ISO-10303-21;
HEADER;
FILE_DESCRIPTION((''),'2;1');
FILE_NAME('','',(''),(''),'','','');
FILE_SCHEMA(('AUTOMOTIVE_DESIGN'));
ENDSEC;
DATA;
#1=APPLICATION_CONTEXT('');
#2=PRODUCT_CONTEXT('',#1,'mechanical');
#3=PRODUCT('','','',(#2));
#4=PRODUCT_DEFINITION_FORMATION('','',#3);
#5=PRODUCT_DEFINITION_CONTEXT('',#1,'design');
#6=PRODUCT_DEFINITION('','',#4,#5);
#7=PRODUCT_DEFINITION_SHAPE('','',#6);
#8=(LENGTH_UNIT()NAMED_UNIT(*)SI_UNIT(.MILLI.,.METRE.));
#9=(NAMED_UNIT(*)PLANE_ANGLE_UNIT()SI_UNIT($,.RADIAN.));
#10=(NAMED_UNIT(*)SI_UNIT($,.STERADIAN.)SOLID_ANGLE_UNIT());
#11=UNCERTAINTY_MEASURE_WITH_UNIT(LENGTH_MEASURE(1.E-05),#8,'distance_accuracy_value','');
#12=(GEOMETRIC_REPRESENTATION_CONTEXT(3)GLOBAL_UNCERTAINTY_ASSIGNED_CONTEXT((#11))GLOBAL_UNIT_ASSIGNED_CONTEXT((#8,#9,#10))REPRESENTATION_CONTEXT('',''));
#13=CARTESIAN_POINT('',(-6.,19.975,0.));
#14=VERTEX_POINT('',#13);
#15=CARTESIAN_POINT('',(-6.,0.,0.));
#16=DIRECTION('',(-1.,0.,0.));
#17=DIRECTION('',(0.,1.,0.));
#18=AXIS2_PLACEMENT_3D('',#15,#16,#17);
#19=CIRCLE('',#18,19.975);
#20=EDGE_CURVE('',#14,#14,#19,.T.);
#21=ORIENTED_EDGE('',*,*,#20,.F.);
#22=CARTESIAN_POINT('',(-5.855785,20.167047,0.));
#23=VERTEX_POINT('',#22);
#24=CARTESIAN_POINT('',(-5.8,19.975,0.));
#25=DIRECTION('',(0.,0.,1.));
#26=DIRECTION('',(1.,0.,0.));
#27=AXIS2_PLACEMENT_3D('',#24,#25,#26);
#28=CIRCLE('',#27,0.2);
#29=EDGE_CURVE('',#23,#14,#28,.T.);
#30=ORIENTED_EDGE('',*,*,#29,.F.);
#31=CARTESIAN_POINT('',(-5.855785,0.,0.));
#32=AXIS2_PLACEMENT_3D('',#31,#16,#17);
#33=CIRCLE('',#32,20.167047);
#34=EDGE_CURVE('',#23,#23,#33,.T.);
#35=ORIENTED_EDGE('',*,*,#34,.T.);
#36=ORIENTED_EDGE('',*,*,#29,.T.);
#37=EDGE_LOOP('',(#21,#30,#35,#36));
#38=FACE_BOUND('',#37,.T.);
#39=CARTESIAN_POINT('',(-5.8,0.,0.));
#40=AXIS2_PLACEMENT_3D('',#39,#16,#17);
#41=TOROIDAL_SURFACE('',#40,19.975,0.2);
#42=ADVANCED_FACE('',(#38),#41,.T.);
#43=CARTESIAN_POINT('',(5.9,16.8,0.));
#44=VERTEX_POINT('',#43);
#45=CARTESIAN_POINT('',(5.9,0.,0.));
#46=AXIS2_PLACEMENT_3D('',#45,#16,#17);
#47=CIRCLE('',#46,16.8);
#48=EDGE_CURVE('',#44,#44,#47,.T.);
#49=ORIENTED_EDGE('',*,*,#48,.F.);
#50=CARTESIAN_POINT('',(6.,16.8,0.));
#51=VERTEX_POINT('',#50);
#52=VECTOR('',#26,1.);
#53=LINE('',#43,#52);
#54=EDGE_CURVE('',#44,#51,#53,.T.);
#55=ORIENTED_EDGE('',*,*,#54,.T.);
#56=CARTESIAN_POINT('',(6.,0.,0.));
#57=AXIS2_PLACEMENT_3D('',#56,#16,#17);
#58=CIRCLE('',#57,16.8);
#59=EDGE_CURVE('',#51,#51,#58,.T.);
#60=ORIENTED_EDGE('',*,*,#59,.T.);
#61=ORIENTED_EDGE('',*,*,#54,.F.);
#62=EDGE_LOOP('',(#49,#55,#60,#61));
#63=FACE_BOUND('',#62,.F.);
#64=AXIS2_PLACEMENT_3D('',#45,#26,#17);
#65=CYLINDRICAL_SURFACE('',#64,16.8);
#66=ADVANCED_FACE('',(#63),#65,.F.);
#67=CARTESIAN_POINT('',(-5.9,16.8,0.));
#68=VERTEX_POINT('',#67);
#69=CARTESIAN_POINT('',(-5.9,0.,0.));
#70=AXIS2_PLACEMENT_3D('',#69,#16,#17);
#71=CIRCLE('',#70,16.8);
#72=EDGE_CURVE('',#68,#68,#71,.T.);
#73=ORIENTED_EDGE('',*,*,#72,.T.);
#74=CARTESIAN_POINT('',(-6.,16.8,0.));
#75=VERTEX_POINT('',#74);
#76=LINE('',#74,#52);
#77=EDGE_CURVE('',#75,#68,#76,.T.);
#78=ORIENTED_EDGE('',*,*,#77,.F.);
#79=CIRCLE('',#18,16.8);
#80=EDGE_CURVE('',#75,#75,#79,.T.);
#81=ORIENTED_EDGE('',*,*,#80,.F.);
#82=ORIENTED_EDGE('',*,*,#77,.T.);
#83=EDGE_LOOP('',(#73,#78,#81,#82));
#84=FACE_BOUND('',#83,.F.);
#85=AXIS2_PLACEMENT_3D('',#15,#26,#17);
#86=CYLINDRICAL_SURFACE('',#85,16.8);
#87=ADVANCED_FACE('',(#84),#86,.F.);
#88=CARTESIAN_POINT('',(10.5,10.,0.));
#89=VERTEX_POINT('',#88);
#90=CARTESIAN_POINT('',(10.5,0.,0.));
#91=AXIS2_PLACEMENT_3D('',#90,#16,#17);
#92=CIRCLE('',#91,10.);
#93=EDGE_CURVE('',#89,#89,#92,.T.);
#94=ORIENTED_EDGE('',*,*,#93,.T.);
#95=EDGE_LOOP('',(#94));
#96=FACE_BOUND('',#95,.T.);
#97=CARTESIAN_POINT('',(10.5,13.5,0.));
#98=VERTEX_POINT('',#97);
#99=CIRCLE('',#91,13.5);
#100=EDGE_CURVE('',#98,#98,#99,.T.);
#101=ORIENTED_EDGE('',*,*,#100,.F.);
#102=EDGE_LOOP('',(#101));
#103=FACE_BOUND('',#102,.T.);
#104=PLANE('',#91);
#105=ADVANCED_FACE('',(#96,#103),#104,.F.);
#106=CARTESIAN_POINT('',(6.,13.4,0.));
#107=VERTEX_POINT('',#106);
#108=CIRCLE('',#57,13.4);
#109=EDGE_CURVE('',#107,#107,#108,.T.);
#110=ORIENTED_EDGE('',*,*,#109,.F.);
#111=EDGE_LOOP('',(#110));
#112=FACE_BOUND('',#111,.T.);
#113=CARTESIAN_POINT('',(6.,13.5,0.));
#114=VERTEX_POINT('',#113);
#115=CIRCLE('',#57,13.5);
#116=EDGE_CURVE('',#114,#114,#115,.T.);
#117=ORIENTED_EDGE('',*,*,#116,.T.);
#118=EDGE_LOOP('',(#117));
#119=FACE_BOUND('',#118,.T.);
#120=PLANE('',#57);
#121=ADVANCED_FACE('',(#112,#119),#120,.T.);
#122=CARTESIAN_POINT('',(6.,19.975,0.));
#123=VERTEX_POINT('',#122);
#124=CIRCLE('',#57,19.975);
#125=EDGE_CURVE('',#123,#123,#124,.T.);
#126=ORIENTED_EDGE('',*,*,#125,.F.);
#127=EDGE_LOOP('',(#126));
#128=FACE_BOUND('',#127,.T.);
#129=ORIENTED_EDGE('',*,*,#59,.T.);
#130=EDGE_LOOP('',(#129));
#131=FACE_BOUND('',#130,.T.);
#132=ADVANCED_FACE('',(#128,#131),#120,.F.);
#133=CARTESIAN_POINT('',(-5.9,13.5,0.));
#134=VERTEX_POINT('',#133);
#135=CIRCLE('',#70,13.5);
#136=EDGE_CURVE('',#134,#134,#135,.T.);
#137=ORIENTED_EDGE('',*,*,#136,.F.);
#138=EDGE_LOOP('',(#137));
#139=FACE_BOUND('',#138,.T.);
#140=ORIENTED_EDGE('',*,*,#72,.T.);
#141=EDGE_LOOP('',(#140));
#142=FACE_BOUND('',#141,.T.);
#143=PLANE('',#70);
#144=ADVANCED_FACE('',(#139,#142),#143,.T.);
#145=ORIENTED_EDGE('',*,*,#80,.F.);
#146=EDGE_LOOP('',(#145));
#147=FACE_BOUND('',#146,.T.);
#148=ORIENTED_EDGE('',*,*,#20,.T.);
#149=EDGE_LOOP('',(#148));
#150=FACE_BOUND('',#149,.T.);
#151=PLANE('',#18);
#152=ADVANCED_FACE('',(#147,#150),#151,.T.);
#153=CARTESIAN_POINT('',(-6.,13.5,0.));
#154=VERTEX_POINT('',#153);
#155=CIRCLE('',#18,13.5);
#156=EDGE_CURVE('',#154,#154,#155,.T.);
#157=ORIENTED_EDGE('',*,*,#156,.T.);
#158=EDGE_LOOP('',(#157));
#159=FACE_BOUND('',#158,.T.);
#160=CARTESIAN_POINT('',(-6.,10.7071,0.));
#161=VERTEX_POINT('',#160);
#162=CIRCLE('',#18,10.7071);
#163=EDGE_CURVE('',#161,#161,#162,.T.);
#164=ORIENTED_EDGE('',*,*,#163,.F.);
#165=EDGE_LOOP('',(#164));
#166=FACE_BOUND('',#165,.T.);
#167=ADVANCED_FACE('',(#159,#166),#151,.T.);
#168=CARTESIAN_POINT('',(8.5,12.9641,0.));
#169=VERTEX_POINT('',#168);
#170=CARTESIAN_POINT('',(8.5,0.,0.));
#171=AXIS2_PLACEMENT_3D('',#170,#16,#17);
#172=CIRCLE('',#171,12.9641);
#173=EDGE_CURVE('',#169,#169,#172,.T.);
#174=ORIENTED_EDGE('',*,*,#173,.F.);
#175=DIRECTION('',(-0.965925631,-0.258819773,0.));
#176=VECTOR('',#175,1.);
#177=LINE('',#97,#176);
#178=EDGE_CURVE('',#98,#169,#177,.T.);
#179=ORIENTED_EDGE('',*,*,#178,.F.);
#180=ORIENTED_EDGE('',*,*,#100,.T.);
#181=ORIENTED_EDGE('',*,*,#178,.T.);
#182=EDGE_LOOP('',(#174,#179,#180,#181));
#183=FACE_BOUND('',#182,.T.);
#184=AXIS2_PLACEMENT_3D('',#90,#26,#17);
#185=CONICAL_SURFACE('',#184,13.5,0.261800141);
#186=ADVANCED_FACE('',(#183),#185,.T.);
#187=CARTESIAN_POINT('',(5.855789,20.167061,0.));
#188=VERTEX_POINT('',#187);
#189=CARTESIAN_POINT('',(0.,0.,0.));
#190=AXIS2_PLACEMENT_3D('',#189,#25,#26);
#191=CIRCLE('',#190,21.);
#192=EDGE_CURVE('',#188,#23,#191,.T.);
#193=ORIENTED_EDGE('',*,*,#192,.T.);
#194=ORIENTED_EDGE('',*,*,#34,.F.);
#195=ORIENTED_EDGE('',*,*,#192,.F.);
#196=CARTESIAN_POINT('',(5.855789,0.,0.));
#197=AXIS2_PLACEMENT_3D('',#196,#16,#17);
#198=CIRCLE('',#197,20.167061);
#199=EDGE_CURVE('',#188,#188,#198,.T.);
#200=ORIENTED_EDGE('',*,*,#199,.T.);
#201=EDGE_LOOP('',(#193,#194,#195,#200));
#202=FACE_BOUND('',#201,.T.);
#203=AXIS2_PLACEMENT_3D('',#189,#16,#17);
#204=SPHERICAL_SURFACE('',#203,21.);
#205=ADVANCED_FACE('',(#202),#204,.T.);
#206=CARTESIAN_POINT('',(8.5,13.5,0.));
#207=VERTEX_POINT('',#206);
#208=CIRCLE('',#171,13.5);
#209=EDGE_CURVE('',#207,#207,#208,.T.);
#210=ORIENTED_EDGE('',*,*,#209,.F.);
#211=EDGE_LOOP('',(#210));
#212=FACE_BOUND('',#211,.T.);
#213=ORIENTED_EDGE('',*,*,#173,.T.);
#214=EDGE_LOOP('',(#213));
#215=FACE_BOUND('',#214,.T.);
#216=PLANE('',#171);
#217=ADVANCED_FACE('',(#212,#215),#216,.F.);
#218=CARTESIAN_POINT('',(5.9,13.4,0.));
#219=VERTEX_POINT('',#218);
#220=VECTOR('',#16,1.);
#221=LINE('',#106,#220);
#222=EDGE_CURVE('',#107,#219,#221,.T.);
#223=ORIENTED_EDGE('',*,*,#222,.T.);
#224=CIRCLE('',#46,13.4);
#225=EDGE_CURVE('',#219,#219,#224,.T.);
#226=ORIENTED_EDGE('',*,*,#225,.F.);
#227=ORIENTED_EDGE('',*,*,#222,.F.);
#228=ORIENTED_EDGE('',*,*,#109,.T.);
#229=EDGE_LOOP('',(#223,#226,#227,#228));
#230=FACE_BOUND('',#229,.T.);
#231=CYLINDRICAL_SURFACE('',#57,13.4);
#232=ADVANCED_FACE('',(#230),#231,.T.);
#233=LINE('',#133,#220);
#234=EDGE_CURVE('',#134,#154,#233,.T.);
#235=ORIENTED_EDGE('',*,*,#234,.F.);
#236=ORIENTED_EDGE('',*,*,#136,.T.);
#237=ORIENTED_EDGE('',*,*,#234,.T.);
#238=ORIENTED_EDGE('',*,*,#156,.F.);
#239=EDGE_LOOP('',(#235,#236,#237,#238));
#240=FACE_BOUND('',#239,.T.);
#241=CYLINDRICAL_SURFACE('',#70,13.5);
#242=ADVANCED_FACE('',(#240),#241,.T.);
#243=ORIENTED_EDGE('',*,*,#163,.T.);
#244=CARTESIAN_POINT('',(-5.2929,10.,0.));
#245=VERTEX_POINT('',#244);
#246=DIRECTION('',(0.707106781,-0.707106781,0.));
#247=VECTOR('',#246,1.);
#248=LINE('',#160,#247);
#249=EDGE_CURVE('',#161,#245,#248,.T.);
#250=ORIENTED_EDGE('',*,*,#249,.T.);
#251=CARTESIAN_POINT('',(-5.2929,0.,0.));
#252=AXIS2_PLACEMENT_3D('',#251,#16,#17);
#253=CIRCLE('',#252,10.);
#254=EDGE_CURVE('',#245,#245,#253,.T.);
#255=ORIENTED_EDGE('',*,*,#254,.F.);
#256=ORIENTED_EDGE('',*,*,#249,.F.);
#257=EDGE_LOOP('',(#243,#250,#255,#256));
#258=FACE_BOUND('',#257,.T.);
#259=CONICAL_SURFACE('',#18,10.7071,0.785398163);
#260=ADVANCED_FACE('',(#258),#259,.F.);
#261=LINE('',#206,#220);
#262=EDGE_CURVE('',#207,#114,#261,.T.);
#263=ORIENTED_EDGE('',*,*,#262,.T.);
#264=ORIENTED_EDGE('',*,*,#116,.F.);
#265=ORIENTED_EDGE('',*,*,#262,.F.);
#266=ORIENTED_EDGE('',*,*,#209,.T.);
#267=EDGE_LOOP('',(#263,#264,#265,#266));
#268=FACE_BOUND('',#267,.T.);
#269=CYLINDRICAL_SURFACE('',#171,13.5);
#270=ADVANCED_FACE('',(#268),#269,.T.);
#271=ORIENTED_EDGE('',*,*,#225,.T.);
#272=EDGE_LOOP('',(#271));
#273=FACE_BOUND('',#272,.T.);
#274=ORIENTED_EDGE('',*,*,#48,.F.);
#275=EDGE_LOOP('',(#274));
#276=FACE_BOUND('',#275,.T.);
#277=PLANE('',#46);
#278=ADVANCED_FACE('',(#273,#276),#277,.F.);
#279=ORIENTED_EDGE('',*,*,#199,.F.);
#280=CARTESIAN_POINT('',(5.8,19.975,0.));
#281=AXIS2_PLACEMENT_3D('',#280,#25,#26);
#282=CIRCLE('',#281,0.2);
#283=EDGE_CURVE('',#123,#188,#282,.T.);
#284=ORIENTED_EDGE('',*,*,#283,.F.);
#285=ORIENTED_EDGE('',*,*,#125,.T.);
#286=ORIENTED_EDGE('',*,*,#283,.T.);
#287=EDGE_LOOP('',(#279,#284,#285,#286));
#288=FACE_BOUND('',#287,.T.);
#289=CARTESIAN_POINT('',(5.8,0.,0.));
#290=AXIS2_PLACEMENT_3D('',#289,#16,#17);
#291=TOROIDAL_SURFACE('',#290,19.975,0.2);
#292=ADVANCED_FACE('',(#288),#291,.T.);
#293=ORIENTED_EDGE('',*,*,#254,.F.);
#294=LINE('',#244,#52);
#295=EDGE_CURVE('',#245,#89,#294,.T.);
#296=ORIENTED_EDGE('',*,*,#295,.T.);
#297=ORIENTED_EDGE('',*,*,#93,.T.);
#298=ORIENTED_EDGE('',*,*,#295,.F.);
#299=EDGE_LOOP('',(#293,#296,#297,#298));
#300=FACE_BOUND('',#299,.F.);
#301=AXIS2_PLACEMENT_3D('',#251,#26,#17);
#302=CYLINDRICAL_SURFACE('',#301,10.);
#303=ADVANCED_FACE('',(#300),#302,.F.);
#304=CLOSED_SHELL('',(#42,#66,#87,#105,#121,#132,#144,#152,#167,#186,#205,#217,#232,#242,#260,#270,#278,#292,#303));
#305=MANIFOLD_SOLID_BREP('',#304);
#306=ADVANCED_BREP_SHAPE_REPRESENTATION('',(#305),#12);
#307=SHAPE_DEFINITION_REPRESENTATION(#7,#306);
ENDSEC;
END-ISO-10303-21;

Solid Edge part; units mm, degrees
sketch "Sketch1" plane through (0, 0, 0) normal (0, 0, 1) x (1, 0, 0)
  line L0 (-6, 19.975) -> (-6, 16.8)
  line L1 (-6, 16.8) -> (-5.9, 16.8)
  line L2 (-5.9, 16.8) -> (-5.9, 13.5)
  line L3 (-5.9, 13.5) -> (-6, 13.5)
  line L4 (-6, 13.5) -> (-6, 10.7071)
  line L5 (-6, 10.7071) -> (-5.2929, 10)
  line L6 (-5.2929, 10) -> (10.5, 10)
  line L7 (10.5, 10) -> (10.5, 13.5)
  line L8 (10.5, 13.5) -> (8.5, 12.9641)
  line L9 (8.5, 12.9641) -> (8.5, 13.5)
  line L10 (8.5, 13.5) -> (6, 13.5)
  line L11 (6, 13.5) -> (6, 13.4)
  line L12 (6, 13.4) -> (5.9, 13.4)
  line L13 (5.9, 13.4) -> (5.9, 16.8)
  line L14 (5.9, 16.8) -> (6, 16.8)
  line L15 (6, 16.8) -> (6, 19.975)
  arc A0 (6, 19.975) -> (5.8558, 20.1671) centre (5.8, 19.975) ccw
  arc A1 (5.8558, 20.1671) -> (-5.8558, 20.1671) centre (0, 0) ccw
  arc A2 (-5.8558, 20.1671) -> (-6, 19.975) centre (-5.8, 19.975) ccw
revolve "RevolvedProtrusion1" add sketch "Sketch1" angle 360 about axis through (10.5, 0, 0) along (-1, 0, 0)
properties part number "62599720_2"
